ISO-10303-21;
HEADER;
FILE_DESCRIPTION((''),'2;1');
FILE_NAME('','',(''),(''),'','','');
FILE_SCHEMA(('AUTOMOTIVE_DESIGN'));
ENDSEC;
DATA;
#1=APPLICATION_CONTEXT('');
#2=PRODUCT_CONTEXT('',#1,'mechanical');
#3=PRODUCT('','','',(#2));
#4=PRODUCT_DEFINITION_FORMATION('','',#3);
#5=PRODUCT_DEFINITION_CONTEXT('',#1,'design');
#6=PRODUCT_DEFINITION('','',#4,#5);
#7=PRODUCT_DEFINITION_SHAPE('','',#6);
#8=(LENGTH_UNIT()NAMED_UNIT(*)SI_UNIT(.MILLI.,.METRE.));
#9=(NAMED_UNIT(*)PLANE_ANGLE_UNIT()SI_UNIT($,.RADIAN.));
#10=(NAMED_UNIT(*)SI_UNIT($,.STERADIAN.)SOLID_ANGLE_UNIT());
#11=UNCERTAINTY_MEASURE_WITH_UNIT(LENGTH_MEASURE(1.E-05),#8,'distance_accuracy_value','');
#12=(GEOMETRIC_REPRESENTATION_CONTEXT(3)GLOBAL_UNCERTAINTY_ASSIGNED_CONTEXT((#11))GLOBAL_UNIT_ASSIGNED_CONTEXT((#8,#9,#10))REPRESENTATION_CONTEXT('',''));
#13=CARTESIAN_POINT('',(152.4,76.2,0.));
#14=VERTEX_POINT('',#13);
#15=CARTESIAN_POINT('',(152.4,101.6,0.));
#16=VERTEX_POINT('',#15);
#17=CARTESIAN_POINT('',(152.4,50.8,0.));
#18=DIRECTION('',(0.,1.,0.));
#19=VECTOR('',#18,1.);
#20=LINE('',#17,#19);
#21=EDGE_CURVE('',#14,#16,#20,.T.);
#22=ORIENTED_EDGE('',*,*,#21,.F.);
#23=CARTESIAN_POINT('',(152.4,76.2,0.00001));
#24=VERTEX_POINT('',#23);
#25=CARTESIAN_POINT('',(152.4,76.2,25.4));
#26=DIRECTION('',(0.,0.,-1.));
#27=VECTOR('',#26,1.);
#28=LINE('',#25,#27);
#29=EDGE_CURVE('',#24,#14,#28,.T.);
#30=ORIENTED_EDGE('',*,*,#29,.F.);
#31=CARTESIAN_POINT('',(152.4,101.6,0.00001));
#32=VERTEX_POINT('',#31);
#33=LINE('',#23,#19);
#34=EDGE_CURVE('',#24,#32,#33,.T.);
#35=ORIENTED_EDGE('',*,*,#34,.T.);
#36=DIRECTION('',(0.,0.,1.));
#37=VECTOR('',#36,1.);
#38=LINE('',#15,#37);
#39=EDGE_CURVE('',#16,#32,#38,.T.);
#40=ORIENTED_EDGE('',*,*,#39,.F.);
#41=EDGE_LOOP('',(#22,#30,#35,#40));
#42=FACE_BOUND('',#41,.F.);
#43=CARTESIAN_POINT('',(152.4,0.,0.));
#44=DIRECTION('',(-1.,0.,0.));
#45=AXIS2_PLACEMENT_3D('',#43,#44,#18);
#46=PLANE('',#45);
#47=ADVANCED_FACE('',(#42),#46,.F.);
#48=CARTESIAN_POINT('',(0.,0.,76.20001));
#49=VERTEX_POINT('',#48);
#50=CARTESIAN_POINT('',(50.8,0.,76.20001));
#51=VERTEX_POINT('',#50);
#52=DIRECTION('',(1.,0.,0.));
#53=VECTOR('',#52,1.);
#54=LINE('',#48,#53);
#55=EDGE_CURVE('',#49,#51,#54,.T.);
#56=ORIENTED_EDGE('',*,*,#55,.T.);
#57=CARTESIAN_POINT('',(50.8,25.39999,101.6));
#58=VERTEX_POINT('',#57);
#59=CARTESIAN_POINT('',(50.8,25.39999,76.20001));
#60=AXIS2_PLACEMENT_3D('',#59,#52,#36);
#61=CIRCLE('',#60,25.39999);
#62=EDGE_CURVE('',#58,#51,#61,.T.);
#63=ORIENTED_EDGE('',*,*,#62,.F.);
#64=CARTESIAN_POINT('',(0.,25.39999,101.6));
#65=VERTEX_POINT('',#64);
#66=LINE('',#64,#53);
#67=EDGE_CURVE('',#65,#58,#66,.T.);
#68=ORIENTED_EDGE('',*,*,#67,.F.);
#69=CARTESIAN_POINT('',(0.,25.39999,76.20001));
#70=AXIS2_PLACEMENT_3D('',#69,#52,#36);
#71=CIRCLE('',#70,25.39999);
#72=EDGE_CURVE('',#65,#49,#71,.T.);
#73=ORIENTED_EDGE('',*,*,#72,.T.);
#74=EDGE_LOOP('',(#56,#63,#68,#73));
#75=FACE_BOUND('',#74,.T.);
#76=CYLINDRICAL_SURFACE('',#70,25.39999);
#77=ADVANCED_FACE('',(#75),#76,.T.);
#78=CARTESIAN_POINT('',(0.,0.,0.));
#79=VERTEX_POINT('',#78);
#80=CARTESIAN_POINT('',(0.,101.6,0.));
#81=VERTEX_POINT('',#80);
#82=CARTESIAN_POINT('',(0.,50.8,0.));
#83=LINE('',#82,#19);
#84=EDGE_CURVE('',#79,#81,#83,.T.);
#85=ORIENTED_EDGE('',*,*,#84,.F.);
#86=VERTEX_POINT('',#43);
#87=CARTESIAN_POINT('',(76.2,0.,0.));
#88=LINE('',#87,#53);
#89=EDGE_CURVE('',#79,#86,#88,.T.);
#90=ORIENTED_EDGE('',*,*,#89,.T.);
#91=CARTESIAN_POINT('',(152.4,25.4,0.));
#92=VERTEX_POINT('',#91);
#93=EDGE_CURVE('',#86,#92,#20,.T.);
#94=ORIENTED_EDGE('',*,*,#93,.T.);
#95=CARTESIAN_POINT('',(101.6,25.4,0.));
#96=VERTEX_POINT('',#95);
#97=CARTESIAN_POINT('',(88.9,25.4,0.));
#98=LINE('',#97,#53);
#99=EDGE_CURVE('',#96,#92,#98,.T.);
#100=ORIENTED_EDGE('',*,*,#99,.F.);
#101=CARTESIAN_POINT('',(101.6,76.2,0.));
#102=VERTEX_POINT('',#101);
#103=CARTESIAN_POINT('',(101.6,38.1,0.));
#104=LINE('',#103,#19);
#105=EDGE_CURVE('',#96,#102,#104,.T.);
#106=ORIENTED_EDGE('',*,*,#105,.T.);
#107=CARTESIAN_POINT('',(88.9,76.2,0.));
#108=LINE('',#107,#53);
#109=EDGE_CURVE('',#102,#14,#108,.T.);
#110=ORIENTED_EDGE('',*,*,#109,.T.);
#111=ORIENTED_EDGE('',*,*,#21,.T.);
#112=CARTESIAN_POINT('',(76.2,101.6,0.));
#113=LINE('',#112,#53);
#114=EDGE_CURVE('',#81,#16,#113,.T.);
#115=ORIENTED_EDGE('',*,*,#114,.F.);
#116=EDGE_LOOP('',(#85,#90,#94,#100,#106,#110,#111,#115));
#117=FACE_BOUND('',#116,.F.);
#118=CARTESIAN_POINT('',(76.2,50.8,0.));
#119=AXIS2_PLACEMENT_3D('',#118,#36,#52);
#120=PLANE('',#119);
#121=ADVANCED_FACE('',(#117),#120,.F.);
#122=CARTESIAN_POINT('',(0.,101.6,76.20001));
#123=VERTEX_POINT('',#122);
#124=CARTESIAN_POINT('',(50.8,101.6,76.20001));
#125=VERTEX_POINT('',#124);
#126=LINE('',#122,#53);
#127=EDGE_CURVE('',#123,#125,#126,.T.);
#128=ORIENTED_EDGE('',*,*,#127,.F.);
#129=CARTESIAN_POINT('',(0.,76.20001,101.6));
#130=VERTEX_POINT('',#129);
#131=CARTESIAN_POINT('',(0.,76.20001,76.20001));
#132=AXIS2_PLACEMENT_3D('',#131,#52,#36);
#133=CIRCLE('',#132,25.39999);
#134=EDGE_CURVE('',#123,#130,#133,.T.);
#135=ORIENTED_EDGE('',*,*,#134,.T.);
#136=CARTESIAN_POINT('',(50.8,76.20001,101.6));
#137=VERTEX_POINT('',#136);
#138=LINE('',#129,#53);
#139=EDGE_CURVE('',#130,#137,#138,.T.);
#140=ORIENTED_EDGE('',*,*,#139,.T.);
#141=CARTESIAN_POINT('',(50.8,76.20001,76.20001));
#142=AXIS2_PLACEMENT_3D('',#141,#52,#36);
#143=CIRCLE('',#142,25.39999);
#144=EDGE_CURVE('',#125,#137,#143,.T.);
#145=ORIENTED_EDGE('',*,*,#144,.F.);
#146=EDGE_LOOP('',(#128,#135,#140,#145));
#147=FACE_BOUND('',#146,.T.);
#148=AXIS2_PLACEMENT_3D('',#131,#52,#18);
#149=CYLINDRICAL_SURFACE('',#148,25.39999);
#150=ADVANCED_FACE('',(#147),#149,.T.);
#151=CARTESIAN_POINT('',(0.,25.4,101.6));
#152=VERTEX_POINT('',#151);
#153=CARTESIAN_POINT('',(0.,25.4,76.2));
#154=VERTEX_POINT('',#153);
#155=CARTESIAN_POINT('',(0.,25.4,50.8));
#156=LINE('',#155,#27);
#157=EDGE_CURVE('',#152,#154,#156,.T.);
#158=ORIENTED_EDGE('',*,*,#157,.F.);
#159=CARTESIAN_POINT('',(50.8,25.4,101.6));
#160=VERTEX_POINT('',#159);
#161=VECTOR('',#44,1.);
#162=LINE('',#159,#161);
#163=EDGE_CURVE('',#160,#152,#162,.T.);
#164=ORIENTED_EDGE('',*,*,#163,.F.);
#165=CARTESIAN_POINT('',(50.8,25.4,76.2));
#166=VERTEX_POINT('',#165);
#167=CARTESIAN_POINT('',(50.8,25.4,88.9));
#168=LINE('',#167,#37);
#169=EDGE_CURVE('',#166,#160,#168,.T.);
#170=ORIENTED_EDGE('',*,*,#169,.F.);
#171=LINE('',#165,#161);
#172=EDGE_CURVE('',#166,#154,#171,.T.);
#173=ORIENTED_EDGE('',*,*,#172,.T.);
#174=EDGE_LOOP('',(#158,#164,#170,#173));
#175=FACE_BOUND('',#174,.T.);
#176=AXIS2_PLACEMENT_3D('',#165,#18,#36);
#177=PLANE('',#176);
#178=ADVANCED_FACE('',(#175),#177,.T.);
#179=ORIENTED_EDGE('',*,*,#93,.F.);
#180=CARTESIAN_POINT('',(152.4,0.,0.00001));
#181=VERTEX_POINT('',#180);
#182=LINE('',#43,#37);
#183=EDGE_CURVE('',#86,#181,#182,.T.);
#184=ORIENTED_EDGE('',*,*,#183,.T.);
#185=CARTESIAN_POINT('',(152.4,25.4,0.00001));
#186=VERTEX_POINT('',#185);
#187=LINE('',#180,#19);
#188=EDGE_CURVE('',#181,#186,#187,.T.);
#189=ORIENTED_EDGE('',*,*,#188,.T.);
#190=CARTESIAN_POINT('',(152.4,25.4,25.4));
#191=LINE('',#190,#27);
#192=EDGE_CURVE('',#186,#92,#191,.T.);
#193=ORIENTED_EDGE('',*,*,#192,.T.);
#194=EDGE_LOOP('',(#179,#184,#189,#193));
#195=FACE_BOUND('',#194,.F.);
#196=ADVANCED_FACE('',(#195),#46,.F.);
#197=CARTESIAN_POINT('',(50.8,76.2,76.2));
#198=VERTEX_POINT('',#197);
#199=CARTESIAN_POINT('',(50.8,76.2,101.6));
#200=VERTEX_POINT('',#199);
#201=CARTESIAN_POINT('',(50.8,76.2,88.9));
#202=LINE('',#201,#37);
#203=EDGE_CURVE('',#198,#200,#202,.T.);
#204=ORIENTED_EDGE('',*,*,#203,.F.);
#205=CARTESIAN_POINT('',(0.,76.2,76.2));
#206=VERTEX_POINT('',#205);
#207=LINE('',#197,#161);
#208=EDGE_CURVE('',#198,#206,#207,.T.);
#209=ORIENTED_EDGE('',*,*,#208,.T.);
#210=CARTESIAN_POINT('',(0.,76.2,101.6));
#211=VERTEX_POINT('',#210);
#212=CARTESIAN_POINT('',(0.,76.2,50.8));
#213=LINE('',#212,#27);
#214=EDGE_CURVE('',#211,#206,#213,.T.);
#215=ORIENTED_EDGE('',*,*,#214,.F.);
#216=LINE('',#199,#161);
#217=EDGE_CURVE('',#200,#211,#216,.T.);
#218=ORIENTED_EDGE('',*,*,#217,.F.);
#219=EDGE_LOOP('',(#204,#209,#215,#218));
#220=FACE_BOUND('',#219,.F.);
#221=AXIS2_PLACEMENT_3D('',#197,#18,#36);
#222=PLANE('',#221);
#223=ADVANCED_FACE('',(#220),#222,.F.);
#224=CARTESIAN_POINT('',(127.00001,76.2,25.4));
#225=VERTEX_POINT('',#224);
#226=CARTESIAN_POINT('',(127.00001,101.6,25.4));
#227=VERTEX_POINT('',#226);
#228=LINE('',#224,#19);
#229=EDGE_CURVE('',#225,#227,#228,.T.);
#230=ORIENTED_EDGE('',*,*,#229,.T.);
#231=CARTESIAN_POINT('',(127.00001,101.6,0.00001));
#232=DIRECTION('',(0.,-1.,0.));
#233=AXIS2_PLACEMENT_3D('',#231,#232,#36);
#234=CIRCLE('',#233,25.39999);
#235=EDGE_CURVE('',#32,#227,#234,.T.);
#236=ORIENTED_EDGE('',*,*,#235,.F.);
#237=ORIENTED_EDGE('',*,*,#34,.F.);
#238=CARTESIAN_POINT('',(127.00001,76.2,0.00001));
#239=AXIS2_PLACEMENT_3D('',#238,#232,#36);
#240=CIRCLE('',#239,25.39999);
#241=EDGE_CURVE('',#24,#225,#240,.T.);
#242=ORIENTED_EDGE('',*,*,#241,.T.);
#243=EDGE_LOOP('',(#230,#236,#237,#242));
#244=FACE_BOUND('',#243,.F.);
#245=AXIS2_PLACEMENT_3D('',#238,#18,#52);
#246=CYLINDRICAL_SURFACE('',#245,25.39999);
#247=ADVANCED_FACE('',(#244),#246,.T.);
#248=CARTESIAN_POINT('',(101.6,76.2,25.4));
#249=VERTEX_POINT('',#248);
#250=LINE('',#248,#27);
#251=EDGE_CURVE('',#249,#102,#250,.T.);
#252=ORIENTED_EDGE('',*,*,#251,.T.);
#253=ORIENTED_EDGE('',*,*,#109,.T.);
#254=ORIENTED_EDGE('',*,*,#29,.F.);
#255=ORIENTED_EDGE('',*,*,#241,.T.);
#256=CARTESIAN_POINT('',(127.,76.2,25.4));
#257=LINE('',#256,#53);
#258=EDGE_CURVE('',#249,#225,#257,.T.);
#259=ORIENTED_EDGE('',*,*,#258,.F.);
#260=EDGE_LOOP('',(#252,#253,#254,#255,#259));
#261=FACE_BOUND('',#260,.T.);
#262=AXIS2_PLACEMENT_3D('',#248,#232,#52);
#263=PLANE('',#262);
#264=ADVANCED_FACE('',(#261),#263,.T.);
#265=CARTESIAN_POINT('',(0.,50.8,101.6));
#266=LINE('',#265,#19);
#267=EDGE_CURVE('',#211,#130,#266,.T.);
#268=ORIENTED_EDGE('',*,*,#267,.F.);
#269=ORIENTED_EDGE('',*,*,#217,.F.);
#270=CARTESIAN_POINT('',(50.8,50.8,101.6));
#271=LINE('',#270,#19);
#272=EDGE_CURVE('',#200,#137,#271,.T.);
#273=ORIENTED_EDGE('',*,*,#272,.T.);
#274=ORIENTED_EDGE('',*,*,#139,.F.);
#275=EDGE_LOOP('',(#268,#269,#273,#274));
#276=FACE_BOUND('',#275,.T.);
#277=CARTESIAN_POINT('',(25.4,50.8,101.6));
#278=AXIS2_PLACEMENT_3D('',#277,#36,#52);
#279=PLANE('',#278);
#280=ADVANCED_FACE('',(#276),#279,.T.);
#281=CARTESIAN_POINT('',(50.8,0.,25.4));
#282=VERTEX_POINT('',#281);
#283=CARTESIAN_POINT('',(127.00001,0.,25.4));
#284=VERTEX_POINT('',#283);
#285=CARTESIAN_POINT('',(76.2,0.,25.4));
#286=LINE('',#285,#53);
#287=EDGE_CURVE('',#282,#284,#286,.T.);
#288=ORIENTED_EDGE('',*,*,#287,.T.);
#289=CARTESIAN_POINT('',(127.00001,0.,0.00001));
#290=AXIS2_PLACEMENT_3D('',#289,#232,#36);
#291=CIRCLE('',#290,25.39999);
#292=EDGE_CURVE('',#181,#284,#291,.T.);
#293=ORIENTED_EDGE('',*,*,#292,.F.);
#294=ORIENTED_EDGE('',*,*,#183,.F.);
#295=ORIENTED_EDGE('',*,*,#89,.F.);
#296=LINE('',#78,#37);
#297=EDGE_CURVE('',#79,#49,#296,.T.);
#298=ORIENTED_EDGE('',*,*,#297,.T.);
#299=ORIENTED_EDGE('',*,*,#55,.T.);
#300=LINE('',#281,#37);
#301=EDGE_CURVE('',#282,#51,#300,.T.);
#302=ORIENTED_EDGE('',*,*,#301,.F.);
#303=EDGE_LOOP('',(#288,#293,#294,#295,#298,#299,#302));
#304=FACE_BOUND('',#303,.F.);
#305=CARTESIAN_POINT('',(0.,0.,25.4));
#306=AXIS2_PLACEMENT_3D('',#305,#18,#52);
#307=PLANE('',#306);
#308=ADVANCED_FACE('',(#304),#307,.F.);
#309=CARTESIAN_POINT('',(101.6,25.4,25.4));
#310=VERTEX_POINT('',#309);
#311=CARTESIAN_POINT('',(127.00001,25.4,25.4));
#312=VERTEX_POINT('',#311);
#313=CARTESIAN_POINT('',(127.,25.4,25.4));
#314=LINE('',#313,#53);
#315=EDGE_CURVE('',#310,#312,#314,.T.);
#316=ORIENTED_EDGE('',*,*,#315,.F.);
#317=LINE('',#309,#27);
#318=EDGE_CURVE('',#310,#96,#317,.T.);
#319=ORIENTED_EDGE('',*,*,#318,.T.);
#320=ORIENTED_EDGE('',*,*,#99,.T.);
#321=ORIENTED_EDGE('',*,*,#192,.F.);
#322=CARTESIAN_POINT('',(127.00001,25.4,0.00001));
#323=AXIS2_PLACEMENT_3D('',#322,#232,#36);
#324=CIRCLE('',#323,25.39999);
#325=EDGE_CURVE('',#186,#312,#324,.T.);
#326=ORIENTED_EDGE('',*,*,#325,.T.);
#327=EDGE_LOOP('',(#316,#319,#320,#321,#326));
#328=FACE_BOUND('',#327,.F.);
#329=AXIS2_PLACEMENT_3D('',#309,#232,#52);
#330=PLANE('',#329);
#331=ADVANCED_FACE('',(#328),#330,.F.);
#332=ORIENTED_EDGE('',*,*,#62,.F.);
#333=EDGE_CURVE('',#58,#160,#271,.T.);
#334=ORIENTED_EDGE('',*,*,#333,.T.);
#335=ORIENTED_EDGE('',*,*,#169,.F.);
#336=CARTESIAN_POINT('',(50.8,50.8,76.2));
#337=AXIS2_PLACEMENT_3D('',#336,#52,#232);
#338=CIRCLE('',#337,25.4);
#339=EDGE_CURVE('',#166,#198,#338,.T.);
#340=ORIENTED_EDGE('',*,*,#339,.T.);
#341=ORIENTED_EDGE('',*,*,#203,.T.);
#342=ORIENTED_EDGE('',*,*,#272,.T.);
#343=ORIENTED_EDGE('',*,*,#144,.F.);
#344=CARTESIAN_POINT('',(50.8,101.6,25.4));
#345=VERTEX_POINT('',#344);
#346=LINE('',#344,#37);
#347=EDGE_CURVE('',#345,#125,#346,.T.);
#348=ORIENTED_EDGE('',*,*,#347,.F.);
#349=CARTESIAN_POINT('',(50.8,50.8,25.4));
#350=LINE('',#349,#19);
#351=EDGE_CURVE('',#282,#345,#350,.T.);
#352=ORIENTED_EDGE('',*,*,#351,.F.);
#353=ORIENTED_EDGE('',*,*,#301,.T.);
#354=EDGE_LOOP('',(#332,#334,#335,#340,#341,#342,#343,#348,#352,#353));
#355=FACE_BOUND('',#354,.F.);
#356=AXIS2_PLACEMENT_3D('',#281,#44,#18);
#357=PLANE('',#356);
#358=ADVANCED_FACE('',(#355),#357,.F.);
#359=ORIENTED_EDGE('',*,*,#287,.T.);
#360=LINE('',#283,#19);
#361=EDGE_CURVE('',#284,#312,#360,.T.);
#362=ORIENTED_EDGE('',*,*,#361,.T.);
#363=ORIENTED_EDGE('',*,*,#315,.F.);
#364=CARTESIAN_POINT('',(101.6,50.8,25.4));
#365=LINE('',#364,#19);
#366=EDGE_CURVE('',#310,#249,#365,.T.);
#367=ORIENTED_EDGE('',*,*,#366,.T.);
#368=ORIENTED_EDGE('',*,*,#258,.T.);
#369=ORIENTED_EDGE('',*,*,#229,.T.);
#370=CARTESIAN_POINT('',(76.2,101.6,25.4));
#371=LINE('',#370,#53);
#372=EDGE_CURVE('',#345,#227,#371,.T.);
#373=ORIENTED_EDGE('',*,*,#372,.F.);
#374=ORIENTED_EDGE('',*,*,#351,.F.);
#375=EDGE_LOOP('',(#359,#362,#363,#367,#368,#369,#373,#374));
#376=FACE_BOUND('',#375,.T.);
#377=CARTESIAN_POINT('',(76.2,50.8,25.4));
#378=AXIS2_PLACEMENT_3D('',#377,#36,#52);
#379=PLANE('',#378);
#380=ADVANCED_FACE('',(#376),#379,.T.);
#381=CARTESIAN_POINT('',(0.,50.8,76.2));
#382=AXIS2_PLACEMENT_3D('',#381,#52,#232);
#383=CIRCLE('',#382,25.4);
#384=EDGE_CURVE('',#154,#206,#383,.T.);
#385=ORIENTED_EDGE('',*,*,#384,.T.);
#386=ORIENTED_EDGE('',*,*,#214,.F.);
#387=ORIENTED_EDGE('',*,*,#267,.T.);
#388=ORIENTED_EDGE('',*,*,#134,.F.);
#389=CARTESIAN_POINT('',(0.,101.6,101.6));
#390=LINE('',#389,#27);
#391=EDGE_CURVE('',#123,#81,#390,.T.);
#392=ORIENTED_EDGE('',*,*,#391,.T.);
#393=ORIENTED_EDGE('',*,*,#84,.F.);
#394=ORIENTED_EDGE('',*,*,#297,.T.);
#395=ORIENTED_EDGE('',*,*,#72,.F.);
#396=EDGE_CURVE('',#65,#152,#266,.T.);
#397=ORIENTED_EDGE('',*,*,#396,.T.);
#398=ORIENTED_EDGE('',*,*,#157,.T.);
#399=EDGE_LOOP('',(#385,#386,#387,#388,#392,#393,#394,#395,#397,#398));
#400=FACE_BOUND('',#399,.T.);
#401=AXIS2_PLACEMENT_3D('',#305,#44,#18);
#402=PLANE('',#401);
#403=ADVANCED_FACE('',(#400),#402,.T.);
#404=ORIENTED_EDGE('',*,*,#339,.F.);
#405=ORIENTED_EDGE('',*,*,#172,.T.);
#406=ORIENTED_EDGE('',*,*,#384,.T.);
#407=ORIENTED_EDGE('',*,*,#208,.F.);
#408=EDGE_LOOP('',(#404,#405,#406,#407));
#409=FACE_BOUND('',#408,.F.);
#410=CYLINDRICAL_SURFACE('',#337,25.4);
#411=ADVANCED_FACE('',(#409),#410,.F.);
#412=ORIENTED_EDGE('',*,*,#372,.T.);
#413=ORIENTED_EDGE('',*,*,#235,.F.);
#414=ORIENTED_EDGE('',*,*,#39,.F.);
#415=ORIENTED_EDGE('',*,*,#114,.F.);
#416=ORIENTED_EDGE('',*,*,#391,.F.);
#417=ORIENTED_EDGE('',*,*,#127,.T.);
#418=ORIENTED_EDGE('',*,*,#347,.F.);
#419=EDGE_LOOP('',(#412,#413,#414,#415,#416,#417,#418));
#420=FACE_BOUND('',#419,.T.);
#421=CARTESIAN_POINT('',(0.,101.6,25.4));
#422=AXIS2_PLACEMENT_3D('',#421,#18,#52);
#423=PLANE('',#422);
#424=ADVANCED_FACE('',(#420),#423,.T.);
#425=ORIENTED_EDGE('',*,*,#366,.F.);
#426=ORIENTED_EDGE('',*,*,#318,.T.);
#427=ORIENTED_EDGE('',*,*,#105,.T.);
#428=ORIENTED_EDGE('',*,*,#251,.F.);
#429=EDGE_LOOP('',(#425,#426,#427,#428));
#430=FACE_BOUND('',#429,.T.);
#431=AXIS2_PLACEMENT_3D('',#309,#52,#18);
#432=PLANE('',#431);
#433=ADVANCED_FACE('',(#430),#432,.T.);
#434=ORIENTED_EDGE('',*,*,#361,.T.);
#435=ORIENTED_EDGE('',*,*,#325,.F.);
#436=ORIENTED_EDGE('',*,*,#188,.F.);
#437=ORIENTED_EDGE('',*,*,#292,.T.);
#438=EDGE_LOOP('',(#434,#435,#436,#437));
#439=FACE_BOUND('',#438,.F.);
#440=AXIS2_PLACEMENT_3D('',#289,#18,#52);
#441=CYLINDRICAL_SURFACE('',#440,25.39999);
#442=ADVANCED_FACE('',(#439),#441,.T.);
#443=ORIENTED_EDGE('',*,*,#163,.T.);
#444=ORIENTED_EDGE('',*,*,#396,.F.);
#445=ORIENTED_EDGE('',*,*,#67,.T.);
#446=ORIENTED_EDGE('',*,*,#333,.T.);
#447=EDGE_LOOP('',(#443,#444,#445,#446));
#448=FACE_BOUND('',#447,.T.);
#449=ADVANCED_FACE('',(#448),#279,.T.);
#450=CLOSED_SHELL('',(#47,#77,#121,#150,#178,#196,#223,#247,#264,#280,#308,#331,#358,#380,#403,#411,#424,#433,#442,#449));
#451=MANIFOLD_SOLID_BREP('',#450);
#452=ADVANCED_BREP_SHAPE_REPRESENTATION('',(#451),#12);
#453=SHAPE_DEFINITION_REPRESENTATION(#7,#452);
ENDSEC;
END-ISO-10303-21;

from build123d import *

# Parameters (mm, degrees)
F0_W     = 152.4
F0_H     = 101.6
F1_DEPTH = 25.4
F2_W     = 50.8
F2_H     = 50.8
F3_DEPTH = 25.401
F4_W     = 50.8
F4_H     = 101.6
F5_DEPTH = 76.2
F6_W     = 50.8
F6_H     = 25.4
F7_DEPTH = 50.801
F9_DEPTH = 50.801
F10_R    = 25.39999


# Not quite as in the source:
# - a fillet or chamfer is up to 0.001 mm smaller than in the source, because OpenCascade refuses the exact size


with BuildPart() as f1:
    # F0 (on Top) → F1 (new body)
    with BuildSketch(Plane.XY):
        with Locations((76.2, 50.8)):
            Rectangle(F0_W, F0_H)
    extrude(amount=F1_DEPTH)

    # F2 (on face) → F3 (cut, through all)
    with BuildSketch(Plane.XY.offset(25.4)):
        with Locations((127, 50.8)):
            Rectangle(F2_W, F2_H)
    extrude(amount=-F3_DEPTH, mode=Mode.SUBTRACT)

    # F4 (on face) → F5 (join)
    with BuildSketch(Plane.XY.offset(25.4)):
        with Locations((25.4, 50.8)):
            Rectangle(F4_W, F4_H)
    extrude(amount=F5_DEPTH)

    # F6 (on face) → F7 (cut, through all)
    with BuildSketch(Plane.YZ.offset(50.8)):
        with Locations((50.8, 88.9)):
            Rectangle(F6_W, F6_H)
    extrude(amount=-F7_DEPTH, mode=Mode.SUBTRACT)

    # F8 (on face) → F9 (cut, through all)
    with BuildSketch(Plane.YZ.offset(50.8)):
        with BuildLine():
            Line((76.2, 76.2), (25.4, 76.2))
            ThreePointArc((25.4, 76.2), (50.8, 50.8), (76.2, 76.2))
        make_face()
    extrude(amount=-F9_DEPTH, mode=Mode.SUBTRACT)

    # F10 (radius 25.4 in the source; OpenCascade refuses exactly that, so slightly less here)
    f10_edges = [f1.edges().sort_by_distance(p)[0] for p in [
        (25.4, 0, 101.6),
        (25.4, 101.6, 101.6),
        (152.4, 12.7, 25.4),
        (152.4, 88.9, 25.4),
    ]]
    fillet(f10_edges, radius=F10_R)


solid = f1.part
